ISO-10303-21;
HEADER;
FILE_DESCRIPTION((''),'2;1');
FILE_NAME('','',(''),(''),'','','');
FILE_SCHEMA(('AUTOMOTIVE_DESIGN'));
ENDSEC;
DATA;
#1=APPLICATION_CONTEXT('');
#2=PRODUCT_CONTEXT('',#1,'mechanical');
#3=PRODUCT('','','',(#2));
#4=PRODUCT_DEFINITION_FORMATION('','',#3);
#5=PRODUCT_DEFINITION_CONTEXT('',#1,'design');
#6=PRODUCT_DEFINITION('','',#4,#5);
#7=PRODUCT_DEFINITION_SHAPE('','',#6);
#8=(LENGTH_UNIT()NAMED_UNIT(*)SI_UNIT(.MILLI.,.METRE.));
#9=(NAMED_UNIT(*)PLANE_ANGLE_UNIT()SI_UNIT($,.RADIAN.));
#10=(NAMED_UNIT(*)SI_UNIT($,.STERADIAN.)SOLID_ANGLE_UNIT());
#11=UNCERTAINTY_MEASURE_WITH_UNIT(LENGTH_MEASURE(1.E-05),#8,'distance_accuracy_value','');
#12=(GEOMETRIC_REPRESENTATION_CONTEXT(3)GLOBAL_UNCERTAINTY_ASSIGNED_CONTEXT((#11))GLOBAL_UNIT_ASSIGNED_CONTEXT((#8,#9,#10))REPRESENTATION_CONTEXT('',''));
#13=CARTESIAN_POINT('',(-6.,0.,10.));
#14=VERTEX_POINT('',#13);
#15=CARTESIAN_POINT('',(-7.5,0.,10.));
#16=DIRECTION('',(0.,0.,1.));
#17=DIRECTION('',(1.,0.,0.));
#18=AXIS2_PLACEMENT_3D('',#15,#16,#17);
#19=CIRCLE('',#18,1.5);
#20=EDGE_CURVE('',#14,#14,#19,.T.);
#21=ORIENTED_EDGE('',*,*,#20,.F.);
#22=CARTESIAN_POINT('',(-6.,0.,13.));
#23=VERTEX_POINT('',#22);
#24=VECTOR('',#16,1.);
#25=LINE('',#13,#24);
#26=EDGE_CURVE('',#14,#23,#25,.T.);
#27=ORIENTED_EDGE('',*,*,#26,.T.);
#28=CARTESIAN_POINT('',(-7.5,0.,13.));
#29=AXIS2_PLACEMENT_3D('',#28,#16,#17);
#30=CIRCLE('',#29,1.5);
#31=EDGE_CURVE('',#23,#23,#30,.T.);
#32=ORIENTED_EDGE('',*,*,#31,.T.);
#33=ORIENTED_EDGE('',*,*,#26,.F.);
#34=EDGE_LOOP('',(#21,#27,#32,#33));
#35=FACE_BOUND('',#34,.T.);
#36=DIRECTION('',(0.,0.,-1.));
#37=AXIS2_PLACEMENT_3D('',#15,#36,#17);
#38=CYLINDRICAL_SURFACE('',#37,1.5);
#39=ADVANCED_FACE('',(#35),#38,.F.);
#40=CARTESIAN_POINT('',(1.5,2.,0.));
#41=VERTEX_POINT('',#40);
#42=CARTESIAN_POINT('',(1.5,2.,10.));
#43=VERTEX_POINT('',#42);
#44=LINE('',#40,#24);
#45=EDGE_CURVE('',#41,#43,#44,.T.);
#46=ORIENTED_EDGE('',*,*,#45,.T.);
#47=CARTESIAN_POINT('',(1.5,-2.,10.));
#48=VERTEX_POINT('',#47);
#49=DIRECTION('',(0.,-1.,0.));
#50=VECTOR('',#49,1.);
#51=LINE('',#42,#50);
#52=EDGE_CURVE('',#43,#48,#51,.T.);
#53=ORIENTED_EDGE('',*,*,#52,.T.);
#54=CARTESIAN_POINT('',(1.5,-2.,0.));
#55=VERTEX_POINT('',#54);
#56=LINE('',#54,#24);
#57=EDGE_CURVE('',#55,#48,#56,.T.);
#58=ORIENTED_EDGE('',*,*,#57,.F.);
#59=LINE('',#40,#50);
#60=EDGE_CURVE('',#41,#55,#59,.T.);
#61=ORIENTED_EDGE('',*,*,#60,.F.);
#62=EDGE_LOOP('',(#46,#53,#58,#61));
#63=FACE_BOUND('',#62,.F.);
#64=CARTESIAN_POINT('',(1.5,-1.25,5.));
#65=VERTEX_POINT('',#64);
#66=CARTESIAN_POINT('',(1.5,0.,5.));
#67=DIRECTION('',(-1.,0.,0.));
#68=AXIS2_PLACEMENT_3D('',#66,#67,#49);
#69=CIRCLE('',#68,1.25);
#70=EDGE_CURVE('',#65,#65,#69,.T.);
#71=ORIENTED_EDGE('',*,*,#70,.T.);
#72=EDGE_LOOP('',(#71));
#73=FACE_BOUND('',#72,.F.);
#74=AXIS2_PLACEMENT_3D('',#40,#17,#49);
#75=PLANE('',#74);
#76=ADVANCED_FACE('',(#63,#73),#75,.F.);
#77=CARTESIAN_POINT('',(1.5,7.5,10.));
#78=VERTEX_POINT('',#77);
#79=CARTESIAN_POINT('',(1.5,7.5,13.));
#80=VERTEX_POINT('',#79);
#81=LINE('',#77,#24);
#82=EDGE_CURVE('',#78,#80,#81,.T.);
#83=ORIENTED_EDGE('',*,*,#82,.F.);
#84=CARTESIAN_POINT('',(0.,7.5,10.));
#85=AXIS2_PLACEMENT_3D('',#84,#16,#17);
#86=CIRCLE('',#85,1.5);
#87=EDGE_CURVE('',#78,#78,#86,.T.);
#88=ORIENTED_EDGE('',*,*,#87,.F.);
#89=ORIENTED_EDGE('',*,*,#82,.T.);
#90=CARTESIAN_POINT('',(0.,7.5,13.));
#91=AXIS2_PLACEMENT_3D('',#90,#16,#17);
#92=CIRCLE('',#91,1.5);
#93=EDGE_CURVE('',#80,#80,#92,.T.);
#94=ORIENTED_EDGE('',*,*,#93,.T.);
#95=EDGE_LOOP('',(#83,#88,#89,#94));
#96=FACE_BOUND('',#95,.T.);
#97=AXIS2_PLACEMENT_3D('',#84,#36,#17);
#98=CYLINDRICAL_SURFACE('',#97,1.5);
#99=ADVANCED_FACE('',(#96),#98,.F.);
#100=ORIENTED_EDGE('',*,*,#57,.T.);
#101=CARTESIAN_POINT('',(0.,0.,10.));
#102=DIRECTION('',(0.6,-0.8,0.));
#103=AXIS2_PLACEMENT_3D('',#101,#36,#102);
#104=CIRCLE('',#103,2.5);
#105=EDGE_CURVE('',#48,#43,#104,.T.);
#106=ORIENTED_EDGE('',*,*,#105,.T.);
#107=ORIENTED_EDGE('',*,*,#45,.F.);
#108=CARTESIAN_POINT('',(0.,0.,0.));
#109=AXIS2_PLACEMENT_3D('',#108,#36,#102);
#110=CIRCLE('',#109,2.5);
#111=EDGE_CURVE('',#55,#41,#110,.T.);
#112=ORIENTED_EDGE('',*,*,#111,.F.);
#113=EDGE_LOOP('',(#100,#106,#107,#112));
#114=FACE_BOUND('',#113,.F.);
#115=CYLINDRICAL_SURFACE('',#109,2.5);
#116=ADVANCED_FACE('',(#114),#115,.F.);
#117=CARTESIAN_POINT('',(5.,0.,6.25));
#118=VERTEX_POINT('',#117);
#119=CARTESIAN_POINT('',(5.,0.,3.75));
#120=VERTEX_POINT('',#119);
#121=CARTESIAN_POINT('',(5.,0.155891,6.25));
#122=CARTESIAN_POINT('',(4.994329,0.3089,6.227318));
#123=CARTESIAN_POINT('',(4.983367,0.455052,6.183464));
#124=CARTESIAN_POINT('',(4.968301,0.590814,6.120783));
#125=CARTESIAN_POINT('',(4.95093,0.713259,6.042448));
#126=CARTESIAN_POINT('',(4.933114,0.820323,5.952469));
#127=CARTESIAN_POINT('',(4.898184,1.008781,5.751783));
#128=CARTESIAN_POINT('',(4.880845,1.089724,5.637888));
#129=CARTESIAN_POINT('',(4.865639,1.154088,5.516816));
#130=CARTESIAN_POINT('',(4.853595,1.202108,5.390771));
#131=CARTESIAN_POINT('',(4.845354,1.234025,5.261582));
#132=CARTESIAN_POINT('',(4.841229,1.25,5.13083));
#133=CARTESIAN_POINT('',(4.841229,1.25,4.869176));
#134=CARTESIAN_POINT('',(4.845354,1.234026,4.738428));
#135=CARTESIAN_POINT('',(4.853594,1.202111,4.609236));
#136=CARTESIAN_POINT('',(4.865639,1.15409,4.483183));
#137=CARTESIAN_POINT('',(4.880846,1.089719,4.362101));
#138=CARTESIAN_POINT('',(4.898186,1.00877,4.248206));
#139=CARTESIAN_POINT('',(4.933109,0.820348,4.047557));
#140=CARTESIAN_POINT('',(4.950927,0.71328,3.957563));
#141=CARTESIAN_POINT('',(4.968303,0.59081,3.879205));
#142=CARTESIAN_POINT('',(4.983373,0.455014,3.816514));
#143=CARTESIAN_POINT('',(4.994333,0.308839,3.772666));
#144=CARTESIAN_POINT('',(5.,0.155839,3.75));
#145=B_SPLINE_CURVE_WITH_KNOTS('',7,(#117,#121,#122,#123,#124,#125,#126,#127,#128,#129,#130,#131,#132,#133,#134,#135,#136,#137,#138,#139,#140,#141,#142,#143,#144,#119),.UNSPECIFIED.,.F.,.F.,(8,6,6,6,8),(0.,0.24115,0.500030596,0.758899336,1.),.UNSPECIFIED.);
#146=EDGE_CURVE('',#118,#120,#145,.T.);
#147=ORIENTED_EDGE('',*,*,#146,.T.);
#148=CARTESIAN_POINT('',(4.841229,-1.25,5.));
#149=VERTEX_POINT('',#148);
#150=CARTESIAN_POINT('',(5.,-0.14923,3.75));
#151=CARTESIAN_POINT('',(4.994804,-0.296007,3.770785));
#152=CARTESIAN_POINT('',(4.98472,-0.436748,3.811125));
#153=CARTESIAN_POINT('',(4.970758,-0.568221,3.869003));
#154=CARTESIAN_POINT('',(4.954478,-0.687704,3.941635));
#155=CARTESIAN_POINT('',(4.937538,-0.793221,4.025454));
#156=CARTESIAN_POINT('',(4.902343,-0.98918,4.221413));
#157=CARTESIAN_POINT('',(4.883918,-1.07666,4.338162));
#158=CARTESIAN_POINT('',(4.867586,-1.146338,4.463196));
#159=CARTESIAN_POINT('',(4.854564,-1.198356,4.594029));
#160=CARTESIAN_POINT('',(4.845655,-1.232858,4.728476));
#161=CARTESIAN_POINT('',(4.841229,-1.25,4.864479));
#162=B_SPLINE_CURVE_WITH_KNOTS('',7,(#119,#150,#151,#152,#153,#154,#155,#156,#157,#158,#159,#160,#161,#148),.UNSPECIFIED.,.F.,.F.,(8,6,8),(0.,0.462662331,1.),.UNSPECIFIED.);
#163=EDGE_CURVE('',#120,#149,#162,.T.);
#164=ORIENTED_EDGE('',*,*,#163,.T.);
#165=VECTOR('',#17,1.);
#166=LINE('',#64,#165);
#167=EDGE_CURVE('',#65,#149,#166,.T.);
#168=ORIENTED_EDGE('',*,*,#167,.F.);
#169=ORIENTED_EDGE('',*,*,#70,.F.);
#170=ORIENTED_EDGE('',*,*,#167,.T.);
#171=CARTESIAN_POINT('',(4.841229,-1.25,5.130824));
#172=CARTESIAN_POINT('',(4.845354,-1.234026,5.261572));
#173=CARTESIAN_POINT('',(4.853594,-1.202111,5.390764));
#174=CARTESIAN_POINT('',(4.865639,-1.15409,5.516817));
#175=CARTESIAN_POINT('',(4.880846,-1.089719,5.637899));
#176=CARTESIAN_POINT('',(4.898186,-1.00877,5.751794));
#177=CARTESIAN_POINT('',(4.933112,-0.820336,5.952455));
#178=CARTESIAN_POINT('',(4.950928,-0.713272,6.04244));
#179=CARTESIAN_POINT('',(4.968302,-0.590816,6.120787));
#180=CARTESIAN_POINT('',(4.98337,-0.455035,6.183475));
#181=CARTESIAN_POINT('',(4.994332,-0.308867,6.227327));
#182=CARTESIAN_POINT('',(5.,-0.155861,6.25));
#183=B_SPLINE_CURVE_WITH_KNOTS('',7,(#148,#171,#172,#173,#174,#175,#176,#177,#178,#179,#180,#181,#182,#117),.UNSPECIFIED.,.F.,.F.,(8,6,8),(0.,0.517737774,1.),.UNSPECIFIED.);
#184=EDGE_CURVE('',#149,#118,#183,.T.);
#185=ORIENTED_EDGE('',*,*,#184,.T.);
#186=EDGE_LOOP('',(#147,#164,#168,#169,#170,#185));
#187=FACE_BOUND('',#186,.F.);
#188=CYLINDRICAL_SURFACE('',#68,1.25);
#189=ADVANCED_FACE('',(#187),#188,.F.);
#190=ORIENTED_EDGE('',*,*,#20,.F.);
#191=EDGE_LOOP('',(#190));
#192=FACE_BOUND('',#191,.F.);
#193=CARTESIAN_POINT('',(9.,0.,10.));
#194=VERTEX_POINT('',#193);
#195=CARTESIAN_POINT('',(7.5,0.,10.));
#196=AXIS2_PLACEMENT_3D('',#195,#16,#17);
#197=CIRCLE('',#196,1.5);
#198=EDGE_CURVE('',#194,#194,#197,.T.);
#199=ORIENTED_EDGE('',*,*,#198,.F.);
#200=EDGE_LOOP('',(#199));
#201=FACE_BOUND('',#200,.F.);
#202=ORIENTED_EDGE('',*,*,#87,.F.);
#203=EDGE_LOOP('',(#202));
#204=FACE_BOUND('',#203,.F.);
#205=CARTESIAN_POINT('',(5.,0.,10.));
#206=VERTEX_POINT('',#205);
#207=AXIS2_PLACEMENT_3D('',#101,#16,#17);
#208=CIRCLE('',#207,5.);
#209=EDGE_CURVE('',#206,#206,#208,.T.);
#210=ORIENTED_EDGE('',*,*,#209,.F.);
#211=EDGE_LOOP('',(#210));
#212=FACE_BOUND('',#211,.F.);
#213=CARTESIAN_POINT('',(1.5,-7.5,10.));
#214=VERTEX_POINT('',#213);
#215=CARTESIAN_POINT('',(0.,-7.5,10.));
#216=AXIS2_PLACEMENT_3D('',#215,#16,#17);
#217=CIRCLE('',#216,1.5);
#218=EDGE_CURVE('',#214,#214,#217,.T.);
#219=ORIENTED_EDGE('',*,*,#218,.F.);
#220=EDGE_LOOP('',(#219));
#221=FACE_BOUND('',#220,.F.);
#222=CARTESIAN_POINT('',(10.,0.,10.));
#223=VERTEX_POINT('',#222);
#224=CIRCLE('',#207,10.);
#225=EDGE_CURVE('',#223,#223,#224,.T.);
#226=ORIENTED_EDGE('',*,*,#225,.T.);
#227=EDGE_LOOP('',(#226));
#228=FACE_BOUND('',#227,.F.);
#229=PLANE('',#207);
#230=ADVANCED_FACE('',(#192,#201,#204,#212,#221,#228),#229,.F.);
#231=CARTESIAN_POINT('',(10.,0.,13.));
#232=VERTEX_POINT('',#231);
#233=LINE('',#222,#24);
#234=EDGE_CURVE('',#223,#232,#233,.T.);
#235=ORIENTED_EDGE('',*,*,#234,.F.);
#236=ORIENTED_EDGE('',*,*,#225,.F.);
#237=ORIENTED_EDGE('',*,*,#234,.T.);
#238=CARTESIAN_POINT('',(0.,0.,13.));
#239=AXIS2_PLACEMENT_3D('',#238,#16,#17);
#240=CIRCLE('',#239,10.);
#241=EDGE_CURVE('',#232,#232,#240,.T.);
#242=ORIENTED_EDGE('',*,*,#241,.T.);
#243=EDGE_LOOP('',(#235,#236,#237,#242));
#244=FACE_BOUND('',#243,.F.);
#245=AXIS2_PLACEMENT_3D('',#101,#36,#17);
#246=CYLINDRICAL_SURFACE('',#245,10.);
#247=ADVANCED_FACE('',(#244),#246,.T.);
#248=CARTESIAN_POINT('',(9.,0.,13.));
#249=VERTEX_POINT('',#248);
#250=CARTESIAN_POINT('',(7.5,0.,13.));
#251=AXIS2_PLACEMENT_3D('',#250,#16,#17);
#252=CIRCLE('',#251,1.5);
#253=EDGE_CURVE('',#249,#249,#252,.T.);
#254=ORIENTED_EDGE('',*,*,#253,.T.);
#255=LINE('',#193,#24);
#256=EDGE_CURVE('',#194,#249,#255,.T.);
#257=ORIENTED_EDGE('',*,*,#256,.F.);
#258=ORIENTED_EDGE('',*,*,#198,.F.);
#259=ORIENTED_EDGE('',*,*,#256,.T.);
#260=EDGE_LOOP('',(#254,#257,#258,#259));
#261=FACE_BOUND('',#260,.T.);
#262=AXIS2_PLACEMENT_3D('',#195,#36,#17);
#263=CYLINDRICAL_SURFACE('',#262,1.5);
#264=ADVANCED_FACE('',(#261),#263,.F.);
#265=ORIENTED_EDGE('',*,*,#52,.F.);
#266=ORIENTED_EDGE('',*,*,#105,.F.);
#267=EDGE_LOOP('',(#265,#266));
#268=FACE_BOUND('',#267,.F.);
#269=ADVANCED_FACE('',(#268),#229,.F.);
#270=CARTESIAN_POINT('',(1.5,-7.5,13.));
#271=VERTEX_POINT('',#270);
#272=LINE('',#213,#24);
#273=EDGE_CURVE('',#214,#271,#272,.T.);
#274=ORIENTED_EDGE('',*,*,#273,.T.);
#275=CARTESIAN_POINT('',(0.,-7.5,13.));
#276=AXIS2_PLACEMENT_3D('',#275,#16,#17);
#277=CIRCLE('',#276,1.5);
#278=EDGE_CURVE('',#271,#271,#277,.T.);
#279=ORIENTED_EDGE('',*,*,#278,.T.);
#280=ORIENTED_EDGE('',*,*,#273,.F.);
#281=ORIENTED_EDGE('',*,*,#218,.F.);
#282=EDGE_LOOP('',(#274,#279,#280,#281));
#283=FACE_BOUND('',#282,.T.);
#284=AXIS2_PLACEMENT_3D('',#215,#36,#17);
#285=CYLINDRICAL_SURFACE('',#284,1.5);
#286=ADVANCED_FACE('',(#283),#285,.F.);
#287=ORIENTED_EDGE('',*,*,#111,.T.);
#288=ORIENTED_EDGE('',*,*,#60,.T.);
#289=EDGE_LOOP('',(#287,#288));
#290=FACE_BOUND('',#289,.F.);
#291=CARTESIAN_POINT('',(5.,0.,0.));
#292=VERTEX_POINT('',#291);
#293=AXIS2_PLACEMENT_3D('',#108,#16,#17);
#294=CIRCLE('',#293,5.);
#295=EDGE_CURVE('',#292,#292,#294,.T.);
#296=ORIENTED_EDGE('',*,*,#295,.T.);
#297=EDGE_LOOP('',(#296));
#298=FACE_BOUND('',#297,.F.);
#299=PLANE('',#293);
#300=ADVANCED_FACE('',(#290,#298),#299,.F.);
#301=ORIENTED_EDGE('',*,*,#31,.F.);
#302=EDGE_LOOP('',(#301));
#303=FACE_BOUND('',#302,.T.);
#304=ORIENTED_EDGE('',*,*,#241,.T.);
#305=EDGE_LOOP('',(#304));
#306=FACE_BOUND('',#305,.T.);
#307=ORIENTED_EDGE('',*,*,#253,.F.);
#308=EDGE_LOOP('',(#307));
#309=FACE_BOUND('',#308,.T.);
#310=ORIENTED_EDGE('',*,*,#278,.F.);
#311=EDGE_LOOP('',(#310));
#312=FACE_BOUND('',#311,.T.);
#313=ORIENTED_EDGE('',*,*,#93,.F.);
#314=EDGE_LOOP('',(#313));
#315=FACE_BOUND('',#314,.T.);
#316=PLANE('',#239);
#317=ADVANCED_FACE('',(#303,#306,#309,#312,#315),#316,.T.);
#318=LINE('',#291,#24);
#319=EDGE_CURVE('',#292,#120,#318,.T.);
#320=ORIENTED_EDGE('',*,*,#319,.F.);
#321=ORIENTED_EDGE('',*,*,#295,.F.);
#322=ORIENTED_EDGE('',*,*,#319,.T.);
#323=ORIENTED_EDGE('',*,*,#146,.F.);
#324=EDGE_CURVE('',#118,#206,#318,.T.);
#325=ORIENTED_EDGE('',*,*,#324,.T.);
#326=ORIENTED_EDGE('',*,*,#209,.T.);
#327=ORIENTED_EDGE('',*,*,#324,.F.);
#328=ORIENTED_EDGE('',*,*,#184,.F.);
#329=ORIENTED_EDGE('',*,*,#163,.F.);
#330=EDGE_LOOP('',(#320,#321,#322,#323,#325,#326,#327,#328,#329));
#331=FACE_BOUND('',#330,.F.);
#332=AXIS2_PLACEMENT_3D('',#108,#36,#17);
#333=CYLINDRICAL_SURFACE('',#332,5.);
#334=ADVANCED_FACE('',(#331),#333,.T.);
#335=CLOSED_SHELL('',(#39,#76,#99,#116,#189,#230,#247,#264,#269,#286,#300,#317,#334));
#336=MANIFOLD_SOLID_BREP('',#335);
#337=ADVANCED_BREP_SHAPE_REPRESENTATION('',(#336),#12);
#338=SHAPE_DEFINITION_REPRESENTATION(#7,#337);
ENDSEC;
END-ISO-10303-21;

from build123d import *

# Parameters (mm, degrees)
F0_R     = 5
F1_DEPTH = 10
F2_R     = 1.25
F3_DEPTH = 3.5
F4_R     = 10
F4_R_2   = 1.5
F4_R_3   = 5
F5_DEPTH = 3


with BuildPart() as f1:
    # F0 (on Top) → F1 (new body)
    with BuildSketch(Plane.XY):
        Circle(F0_R)
        with BuildLine():
            ThreePointArc((1.5, 2), (2.2360679775, 1.1180339887), (2.5, 0))
            ThreePointArc((2.5, 0), (2.2360679775, -1.1180339887), (1.5, -2))
            ThreePointArc((1.5, -2), (-2.5, 0), (1.5, 2))
        make_face(mode=Mode.SUBTRACT)
        with BuildLine():
            ThreePointArc((1.5, -2), (2.2360679775, -1.1180339887), (2.5, 0))
            ThreePointArc((2.5, 0), (2.2360679775, 1.1180339887), (1.5, 2))
            Line((1.5, 2), (1.5, -2))
        make_face()
    extrude(amount=F1_DEPTH)

    # F2 (on face) → F3 (cut, through all)
    with BuildSketch(Plane(origin=(1.5, 0, 0), x_dir=(0, -1, 0), z_dir=(-1, 0, 0))):
        with Locations((0, 5)):
            Circle(F2_R)
    extrude(amount=-F3_DEPTH, mode=Mode.SUBTRACT)

    # F4 (on face) → F5 (join)
    with BuildSketch(Plane.XY.offset(10)):
        Circle(F4_R)
        with Locations((0, -7.5)):
            Circle(F4_R_2, mode=Mode.SUBTRACT)
        with Locations((-7.5, 0)):
            Circle(F4_R_2, mode=Mode.SUBTRACT)
        Circle(F4_R_3, mode=Mode.SUBTRACT)
        with Locations((7.5, 0)):
            Circle(F4_R_2, mode=Mode.SUBTRACT)
        with Locations((0, 7.5)):
            Circle(F4_R_2, mode=Mode.SUBTRACT)
        Circle(F4_R_3)
        with BuildLine():
            Line((1.5, 2), (1.5, -2))
            ThreePointArc((1.5, -2), (-2.5, 0), (1.5, 2))
        make_face(mode=Mode.SUBTRACT)
        with BuildLine():
            ThreePointArc((1.5, 2), (-2.5, 0), (1.5, -2))
            Line((1.5, -2), (1.5, 2))
        make_face()
    extrude(amount=F5_DEPTH)


solid = f1.part
